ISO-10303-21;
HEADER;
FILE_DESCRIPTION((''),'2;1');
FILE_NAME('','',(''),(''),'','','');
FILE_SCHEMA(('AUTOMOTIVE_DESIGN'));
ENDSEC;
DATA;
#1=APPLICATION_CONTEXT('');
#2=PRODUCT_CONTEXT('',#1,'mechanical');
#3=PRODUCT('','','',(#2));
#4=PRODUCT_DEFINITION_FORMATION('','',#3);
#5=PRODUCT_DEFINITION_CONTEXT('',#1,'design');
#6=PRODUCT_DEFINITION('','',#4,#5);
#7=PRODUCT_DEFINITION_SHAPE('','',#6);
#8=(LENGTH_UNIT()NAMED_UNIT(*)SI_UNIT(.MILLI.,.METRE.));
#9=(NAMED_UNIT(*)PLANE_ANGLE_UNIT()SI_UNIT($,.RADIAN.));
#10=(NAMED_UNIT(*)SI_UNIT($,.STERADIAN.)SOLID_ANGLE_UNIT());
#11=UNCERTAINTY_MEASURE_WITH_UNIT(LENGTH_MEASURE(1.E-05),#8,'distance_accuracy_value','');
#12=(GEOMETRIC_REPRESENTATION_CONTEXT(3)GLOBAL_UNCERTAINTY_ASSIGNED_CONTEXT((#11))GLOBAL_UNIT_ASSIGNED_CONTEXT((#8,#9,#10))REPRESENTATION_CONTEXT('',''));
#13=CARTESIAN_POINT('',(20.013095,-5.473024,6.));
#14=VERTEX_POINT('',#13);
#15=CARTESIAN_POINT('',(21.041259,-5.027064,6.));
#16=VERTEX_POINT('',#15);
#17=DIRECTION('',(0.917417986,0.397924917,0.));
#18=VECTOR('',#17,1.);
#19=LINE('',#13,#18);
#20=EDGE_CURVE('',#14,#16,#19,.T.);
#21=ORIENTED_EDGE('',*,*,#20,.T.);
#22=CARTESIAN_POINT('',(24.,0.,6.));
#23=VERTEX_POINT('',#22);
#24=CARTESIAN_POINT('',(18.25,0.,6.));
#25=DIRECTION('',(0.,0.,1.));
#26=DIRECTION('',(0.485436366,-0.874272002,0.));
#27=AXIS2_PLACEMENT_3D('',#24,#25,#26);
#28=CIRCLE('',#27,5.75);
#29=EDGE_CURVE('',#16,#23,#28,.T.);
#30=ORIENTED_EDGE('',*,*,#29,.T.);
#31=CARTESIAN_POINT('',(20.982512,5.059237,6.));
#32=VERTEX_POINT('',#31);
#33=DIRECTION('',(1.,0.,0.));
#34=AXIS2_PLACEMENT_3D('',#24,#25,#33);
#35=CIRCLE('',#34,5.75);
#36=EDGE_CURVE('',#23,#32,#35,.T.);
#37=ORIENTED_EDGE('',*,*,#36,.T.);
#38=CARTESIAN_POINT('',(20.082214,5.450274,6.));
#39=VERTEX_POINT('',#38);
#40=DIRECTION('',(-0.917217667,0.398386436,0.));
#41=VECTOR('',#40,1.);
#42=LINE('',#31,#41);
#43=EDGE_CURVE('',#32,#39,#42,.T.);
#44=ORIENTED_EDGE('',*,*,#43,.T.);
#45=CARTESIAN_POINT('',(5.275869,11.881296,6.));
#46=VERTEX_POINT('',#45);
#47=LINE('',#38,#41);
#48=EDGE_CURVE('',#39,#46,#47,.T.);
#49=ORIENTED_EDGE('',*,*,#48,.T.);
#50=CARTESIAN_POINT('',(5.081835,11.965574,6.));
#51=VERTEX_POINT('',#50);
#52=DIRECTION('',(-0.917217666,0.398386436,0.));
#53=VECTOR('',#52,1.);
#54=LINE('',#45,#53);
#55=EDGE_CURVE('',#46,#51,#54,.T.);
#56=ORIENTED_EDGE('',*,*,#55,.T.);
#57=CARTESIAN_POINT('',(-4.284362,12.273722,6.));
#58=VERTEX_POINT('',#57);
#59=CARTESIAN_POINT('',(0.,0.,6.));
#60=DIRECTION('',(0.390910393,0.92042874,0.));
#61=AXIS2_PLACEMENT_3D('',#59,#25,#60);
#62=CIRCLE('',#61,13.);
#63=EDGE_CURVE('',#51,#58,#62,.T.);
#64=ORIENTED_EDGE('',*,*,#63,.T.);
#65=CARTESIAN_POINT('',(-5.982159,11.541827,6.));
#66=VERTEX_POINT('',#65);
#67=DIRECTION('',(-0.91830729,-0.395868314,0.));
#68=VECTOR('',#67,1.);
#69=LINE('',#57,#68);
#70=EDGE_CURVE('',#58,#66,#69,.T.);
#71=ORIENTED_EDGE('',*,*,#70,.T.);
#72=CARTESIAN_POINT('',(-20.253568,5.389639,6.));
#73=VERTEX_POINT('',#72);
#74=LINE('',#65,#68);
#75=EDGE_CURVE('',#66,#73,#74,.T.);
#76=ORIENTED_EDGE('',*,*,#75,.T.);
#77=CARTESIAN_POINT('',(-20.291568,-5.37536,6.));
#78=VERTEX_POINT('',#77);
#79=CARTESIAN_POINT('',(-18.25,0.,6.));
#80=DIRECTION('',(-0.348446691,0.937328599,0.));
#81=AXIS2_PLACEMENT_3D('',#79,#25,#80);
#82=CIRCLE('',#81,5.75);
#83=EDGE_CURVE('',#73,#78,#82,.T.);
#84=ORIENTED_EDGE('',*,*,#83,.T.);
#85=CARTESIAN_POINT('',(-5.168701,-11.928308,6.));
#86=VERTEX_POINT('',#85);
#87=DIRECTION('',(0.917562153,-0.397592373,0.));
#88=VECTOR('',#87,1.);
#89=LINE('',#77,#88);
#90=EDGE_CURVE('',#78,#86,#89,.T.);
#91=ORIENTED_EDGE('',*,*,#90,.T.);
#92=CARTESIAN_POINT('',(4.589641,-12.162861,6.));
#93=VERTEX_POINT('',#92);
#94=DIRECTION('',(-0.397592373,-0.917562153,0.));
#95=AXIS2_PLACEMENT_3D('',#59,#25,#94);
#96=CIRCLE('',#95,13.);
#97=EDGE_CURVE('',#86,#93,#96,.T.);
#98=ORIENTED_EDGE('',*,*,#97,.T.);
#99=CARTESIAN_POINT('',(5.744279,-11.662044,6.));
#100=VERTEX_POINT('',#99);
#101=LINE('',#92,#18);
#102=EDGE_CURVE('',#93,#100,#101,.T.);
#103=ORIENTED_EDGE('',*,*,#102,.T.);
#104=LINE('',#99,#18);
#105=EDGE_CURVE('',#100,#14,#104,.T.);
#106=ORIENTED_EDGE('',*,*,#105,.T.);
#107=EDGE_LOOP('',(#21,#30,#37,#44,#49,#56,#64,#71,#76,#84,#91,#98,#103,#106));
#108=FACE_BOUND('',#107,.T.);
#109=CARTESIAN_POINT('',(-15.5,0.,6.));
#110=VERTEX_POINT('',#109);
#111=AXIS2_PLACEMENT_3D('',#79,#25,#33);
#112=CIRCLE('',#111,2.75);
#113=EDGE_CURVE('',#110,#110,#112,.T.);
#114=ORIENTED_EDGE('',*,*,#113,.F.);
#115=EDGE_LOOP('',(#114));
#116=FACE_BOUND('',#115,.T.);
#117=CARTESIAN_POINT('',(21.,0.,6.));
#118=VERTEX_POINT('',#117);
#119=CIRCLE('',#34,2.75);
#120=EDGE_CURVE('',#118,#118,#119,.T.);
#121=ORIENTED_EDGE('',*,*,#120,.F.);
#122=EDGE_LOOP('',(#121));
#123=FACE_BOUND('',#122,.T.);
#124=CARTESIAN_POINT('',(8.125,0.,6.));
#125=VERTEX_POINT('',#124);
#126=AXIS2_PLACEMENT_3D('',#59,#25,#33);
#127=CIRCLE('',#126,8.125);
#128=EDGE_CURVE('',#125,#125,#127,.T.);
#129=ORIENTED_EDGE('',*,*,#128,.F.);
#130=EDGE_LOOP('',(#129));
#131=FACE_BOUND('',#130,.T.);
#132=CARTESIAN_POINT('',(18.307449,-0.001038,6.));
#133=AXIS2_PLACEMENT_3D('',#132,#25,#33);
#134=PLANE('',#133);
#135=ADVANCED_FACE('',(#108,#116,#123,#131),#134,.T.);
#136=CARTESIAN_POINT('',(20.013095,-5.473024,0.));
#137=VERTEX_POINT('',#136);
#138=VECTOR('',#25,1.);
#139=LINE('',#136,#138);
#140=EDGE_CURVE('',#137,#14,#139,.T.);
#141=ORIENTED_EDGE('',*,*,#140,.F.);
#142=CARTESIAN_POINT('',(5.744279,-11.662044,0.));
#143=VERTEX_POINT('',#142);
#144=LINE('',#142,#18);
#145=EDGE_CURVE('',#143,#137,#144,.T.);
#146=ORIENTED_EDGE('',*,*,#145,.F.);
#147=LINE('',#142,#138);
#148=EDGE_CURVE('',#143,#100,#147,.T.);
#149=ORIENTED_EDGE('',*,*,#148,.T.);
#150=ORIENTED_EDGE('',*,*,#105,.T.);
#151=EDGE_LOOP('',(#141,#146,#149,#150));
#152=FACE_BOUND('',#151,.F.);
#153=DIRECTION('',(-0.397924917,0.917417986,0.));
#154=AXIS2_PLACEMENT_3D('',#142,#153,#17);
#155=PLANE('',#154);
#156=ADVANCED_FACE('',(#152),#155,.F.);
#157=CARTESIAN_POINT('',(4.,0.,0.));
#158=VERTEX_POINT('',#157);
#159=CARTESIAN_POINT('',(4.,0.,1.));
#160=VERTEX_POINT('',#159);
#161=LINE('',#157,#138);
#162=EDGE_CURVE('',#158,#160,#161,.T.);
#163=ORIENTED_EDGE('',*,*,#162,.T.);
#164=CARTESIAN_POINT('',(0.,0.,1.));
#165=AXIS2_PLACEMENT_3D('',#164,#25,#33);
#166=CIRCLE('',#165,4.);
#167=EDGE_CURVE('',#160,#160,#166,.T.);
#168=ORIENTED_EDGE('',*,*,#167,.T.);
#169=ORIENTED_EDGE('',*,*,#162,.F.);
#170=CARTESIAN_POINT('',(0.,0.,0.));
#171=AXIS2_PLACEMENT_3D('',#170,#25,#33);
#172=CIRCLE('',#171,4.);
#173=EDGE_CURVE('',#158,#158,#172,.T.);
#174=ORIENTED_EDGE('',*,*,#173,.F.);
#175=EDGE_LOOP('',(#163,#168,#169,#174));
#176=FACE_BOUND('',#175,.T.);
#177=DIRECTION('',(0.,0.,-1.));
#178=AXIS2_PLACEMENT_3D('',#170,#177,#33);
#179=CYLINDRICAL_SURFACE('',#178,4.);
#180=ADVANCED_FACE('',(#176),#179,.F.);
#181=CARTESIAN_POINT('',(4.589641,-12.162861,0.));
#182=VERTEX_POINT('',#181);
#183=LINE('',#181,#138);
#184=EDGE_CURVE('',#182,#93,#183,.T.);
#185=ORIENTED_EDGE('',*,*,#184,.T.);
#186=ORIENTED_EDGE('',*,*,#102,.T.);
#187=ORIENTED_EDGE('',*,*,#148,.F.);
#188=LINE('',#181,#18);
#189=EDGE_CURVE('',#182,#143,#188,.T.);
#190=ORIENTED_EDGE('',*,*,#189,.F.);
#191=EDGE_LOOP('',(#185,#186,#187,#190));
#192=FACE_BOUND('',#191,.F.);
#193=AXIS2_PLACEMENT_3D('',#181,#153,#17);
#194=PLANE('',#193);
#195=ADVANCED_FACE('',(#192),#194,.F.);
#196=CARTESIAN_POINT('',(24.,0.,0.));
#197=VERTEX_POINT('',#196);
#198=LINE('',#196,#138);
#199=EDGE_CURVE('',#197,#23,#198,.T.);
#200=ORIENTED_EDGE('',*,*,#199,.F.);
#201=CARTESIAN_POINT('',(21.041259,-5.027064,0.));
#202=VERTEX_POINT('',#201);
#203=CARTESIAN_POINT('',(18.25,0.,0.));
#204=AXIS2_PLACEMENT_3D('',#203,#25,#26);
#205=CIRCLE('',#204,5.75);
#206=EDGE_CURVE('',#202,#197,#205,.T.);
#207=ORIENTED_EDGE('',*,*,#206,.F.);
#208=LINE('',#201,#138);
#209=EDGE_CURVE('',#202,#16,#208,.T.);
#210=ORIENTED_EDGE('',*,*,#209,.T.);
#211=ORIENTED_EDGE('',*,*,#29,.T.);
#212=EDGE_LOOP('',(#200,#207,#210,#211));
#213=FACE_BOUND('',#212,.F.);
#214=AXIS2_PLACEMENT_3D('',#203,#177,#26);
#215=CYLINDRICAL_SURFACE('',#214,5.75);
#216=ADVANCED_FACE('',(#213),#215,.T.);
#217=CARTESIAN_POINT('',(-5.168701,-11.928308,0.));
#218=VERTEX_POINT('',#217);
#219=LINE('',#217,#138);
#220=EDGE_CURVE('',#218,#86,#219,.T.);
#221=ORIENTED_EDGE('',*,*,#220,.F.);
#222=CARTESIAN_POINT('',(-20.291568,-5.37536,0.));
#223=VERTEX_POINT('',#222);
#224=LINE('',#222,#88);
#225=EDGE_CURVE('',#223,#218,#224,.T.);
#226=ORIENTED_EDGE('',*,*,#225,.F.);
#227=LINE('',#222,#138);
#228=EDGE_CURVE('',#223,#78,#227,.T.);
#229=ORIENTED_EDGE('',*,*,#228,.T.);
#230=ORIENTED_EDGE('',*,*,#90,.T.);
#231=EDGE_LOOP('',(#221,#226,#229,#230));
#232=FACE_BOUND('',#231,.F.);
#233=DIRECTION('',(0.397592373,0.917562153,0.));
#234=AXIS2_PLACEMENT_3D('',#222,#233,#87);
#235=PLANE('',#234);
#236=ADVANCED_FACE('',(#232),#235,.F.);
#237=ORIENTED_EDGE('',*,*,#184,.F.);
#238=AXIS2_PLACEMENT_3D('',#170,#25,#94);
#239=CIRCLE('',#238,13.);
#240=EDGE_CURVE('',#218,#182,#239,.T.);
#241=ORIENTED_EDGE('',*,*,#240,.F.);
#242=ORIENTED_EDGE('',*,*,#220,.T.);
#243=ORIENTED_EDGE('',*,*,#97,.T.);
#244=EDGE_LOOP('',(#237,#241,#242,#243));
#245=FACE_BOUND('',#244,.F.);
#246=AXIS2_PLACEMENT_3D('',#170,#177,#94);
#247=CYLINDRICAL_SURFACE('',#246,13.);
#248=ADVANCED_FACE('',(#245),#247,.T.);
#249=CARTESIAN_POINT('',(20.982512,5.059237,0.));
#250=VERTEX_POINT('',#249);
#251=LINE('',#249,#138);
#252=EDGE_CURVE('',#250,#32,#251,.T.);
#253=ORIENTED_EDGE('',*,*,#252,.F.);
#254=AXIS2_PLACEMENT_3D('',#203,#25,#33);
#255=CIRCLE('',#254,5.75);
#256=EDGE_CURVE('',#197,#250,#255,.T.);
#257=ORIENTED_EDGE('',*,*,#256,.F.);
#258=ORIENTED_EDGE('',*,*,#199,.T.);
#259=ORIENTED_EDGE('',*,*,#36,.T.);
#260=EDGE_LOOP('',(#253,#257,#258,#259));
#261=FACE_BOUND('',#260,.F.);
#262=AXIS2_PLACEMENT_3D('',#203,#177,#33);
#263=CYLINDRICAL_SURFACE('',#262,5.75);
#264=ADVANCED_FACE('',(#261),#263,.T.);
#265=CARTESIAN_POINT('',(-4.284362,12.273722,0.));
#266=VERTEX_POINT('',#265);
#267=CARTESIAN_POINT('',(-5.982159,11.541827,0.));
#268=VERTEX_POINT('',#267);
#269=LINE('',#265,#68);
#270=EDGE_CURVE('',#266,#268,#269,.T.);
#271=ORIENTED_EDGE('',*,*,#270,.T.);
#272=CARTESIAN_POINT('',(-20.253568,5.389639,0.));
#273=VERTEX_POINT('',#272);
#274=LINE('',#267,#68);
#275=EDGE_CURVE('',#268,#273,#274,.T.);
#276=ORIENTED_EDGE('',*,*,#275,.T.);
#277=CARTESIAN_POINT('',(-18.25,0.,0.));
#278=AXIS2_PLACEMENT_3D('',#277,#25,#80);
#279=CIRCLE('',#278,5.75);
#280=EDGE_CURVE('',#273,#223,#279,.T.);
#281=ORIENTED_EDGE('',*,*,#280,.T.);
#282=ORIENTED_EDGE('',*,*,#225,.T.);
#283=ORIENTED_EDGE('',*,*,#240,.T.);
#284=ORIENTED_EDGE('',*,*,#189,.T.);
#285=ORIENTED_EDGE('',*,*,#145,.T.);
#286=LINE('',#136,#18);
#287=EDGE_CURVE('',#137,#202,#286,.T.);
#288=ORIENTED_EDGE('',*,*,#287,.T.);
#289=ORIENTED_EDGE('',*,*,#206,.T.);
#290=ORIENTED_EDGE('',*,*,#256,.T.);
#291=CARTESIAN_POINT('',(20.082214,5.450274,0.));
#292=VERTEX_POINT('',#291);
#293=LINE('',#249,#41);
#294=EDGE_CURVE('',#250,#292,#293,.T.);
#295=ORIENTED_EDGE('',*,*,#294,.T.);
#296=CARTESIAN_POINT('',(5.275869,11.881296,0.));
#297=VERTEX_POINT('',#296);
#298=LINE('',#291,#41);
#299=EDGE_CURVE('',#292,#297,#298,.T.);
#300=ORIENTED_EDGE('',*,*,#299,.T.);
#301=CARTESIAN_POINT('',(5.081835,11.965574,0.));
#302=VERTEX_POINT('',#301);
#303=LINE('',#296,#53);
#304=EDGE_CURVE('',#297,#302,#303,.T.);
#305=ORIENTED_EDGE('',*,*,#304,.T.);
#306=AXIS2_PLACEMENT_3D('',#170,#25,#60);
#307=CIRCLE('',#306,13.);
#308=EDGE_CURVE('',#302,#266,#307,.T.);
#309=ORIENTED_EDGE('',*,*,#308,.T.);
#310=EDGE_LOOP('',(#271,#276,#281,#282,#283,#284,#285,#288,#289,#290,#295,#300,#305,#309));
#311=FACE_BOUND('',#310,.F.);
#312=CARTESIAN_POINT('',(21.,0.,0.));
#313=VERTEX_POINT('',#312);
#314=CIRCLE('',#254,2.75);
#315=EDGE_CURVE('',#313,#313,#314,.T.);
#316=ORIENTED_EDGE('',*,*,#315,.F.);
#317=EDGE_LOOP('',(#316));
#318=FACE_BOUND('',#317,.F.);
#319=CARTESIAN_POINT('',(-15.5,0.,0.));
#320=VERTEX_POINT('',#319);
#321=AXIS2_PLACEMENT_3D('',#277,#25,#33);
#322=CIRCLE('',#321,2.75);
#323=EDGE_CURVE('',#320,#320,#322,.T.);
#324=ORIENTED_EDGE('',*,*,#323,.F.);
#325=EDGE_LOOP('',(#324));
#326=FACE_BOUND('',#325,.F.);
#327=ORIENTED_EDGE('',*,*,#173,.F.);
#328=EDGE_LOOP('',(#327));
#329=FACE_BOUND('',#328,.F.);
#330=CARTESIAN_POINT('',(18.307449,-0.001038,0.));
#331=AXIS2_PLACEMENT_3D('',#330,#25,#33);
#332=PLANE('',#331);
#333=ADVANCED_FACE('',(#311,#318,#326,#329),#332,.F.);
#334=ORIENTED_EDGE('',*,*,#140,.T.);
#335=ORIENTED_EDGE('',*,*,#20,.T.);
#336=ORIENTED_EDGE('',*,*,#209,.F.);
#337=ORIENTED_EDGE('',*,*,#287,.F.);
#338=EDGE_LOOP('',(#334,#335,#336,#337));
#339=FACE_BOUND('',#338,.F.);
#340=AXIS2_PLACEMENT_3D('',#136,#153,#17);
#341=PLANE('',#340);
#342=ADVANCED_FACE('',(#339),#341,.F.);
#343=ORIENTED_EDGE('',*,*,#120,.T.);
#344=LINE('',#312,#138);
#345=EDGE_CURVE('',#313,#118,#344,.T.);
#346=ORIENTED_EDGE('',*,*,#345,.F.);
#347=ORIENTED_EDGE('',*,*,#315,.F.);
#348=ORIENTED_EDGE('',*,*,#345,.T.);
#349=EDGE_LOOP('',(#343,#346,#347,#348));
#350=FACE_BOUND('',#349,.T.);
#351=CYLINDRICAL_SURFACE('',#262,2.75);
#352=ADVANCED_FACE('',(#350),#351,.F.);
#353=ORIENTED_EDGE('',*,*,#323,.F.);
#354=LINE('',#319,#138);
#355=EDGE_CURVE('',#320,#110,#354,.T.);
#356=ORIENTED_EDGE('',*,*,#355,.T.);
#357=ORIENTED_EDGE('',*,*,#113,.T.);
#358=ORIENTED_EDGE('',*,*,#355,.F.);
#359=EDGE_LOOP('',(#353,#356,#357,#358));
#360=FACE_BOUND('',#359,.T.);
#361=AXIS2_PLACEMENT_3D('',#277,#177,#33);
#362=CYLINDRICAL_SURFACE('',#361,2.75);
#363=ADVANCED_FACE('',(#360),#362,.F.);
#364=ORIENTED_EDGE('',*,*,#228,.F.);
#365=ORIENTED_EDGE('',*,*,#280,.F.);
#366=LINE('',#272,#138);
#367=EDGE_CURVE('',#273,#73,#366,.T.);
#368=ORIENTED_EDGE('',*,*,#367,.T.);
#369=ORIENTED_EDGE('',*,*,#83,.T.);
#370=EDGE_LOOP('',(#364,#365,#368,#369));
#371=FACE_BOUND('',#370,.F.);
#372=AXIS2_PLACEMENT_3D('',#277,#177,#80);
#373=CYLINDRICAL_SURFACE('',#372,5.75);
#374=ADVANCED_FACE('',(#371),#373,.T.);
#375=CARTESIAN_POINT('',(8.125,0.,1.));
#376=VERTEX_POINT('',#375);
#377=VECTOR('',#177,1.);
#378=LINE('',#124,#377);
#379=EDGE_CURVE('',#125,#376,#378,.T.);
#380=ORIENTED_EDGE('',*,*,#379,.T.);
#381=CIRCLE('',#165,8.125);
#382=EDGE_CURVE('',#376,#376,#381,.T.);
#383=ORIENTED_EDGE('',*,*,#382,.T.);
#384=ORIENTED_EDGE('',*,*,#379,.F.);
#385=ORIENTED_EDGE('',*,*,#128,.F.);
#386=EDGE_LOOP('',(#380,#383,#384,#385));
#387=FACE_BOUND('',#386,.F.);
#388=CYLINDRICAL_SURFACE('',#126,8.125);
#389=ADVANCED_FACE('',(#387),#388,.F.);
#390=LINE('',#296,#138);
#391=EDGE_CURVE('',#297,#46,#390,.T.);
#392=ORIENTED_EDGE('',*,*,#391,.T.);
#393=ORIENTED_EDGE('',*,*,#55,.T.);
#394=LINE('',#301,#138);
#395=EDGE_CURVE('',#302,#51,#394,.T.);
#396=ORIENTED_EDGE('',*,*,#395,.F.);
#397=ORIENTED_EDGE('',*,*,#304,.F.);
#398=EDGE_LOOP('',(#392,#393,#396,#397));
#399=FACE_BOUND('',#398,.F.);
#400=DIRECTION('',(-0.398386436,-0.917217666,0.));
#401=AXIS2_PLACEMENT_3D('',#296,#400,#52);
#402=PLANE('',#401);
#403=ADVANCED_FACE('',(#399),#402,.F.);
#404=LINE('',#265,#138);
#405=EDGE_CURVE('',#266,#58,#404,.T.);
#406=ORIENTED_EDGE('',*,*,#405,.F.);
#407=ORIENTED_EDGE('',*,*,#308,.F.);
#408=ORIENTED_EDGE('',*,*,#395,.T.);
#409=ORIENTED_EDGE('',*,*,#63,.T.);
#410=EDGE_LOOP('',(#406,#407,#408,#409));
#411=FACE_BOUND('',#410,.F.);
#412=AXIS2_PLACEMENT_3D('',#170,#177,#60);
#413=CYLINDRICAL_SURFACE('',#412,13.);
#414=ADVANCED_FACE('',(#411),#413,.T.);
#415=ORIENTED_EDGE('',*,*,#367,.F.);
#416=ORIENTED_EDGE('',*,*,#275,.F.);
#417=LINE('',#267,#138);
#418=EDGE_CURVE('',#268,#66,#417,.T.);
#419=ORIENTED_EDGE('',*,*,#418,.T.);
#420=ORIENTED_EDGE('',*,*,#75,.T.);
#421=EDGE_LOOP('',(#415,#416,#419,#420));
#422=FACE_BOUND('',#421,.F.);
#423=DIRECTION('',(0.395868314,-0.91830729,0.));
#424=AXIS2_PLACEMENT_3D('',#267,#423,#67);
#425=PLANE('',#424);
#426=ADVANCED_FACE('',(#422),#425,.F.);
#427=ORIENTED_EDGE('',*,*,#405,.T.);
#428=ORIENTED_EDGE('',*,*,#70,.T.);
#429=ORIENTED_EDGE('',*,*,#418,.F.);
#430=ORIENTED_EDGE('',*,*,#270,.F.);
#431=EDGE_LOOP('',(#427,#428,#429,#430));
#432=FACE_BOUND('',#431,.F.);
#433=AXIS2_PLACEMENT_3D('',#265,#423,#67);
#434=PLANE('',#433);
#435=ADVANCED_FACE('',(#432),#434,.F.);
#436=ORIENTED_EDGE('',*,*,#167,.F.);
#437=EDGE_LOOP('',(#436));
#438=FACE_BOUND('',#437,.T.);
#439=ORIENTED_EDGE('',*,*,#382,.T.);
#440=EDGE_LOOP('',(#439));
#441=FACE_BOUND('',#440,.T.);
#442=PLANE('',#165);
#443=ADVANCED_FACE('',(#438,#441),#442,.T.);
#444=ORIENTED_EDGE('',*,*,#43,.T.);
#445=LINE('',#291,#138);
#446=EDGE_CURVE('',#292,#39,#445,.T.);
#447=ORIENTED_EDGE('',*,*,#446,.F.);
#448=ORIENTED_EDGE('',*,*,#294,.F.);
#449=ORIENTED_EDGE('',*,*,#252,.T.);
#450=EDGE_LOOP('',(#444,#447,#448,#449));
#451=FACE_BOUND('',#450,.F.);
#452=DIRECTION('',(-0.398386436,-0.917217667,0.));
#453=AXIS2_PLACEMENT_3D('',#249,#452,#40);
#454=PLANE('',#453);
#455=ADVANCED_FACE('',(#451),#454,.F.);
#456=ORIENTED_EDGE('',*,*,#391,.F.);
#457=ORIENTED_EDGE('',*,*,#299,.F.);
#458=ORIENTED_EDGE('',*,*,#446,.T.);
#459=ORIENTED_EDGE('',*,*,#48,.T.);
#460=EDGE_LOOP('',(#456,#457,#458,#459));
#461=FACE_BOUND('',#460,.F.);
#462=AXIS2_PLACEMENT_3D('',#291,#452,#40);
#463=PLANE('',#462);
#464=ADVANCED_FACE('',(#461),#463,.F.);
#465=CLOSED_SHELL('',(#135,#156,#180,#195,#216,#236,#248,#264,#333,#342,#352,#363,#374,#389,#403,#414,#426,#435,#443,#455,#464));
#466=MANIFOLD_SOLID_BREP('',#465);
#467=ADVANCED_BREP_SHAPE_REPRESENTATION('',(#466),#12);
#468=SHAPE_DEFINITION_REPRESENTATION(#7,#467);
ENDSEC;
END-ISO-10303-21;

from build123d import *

# Parameters (mm, degrees)
F0_R     = 2.75
F0_R_2   = 4
F1_DEPTH = 6
F2_R     = 8.125
F2_R_2   = 4
F3_DEPTH = 5


# Not quite as in the source:
# - a feature names something its author has since deleted; it is built from what else it names


with BuildPart() as f1:
    # F0 (on Top) → F1 (new body)
    with BuildSketch(Plane.XY):
        with BuildLine():
            ThreePointArc((20.0822139412, 5.4502744952), (15.7589539647, 5.182392271), (12.8493150685, 1.9736013454))
            ThreePointArc((12.8493150685, 1.9736013454), (12.9622740268, 0.9896727008), (13, 0))
            ThreePointArc((13, 0), (12.9622740268, -0.9896727008), (12.8493150685, -1.9736013454))
            ThreePointArc((12.8493150685, -1.9736013454), (15.7262122641, -5.1665264409), (20.0130954241, -5.4730242577))
            Line((20.0130954241, -5.4730242577), (21.0412591059, -5.0270640143))
            ThreePointArc((21.0412591059, -5.0270640143), (23.2054131946, -2.9165699153), (24, 0))
            ThreePointArc((24, 0), (23.1883419046, 2.9453826972), (20.982511571, 5.0592371474))
            Line((20.982511571, 5.0592371474), (20.0822139412, 5.4502744952))
        make_face()
        with Locations((18.25, 0)):
            Circle(F0_R, mode=Mode.SUBTRACT)
        with BuildLine():
            Line((20.0822139412, 5.4502744952), (5.2758693561, 11.8812963323))
            ThreePointArc((5.2758693561, 11.8812963323), (10.328174214, 7.8948601891), (12.8493150685, 1.9736013454))
            ThreePointArc((12.8493150685, 1.9736013454), (15.7589539647, 5.182392271), (20.0822139412, 5.4502744952))
        make_face()
        with BuildLine():
            ThreePointArc((13, 0), (12.9622740268, 0.9896727008), (12.8493150685, 1.9736013454))
            ThreePointArc((12.8493150685, 1.9736013454), (12.5, 0), (12.8493150685, -1.9736013454))
            ThreePointArc((12.8493150685, -1.9736013454), (12.9622740268, -0.9896727008), (13, 0))
        make_face()
        with BuildLine():
            ThreePointArc((20.0130954241, -5.4730242577), (15.7262122641, -5.1665264409), (12.8493150685, -1.9736013454))
            ThreePointArc((12.8493150685, -1.9736013454), (10.4831727002, -7.6878534154), (5.7442785493, -11.6620437295))
            Line((5.7442785493, -11.6620437295), (20.0130954241, -5.4730242577))
        make_face()
        with BuildLine():
            Line((5.2758693561, 11.8812963323), (5.0818351063, 11.9655736157))
            ThreePointArc((5.0818351063, 11.9655736157), (0.4274688612, 12.9929700366), (-4.2843620194, 12.273721607))
            Line((-4.2843620194, 12.273721607), (-5.9821590265, 11.5418271249))
            ThreePointArc((-5.9821590265, 11.5418271249), (-10.5614317348, 7.5799841498), (-12.8493150685, 1.9736013454))
            ThreePointArc((-12.8493150685, 1.9736013454), (-12.588002192, 1.0021381252), (-12.5, 0))
            ThreePointArc((-12.5, 0), (-12.588002192, -1.0021381252), (-12.8493150685, -1.9736013454))
            ThreePointArc((-12.8493150685, -1.9736013454), (-10.2925346971, -7.9412675001), (-5.1687008476, -11.9283079918))
            ThreePointArc((-5.1687008476, -11.9283079918), (-0.3123803464, -12.9962463242), (4.589640736, -12.1628614197))
            Line((4.589640736, -12.1628614197), (5.7442785493, -11.6620437295))
            ThreePointArc((5.7442785493, -11.6620437295), (10.4831727002, -7.6878534154), (12.8493150685, -1.9736013454))
            ThreePointArc((12.8493150685, -1.9736013454), (12.5, 0), (12.8493150685, 1.9736013454))
            ThreePointArc((12.8493150685, 1.9736013454), (10.328174214, 7.8948601891), (5.2758693561, 11.8812963323))
        make_face()
        Circle(F0_R_2, mode=Mode.SUBTRACT)
        with BuildLine():
            ThreePointArc((-12.8493150685, -1.9736013454), (-13, 0), (-12.8493150685, 1.9736013454))
            ThreePointArc((-12.8493150685, 1.9736013454), (-15.8411768162, 5.2211177797), (-20.2535684755, 5.3896394466))
            ThreePointArc((-20.2535684755, 5.3896394466), (-23.9999641766, 0.020296977), (-20.2915681825, -5.3753603932))
            ThreePointArc((-20.2915681825, -5.3753603932), (-15.8596218943, -5.229588178), (-12.8493150685, -1.9736013454))
        make_face()
        with Locations((-18.25, 0)):
            Circle(F0_R, mode=Mode.SUBTRACT)
        with BuildLine():
            ThreePointArc((-12.5, 0), (-12.588002192, 1.0021381252), (-12.8493150685, 1.9736013454))
            ThreePointArc((-12.8493150685, 1.9736013454), (-13, 0), (-12.8493150685, -1.9736013454))
            ThreePointArc((-12.8493150685, -1.9736013454), (-12.588002192, -1.0021381252), (-12.5, 0))
        make_face()
        with BuildLine():
            ThreePointArc((-12.8493150685, 1.9736013454), (-10.5614317348, 7.5799841498), (-5.9821590265, 11.5418271249))
            Line((-5.9821590265, 11.5418271249), (-20.2535684755, 5.3896394466))
            ThreePointArc((-20.2535684755, 5.3896394466), (-15.8411768162, 5.2211177797), (-12.8493150685, 1.9736013454))
        make_face()
        with BuildLine():
            ThreePointArc((-5.1687008476, -11.9283079918), (-10.2925346971, -7.9412675001), (-12.8493150685, -1.9736013454))
            ThreePointArc((-12.8493150685, -1.9736013454), (-15.8596218943, -5.229588178), (-20.2915681825, -5.3753603932))
            Line((-20.2915681825, -5.3753603932), (-5.1687008476, -11.9283079918))
        make_face()
    extrude(amount=F1_DEPTH)

    # F2 (on face) → F3 (cut)
    with BuildSketch(Plane.XY.offset(6)):
        Circle(F2_R)
        Circle(F2_R_2, mode=Mode.SUBTRACT)
    extrude(amount=-F3_DEPTH, mode=Mode.SUBTRACT)


solid = f1.part
